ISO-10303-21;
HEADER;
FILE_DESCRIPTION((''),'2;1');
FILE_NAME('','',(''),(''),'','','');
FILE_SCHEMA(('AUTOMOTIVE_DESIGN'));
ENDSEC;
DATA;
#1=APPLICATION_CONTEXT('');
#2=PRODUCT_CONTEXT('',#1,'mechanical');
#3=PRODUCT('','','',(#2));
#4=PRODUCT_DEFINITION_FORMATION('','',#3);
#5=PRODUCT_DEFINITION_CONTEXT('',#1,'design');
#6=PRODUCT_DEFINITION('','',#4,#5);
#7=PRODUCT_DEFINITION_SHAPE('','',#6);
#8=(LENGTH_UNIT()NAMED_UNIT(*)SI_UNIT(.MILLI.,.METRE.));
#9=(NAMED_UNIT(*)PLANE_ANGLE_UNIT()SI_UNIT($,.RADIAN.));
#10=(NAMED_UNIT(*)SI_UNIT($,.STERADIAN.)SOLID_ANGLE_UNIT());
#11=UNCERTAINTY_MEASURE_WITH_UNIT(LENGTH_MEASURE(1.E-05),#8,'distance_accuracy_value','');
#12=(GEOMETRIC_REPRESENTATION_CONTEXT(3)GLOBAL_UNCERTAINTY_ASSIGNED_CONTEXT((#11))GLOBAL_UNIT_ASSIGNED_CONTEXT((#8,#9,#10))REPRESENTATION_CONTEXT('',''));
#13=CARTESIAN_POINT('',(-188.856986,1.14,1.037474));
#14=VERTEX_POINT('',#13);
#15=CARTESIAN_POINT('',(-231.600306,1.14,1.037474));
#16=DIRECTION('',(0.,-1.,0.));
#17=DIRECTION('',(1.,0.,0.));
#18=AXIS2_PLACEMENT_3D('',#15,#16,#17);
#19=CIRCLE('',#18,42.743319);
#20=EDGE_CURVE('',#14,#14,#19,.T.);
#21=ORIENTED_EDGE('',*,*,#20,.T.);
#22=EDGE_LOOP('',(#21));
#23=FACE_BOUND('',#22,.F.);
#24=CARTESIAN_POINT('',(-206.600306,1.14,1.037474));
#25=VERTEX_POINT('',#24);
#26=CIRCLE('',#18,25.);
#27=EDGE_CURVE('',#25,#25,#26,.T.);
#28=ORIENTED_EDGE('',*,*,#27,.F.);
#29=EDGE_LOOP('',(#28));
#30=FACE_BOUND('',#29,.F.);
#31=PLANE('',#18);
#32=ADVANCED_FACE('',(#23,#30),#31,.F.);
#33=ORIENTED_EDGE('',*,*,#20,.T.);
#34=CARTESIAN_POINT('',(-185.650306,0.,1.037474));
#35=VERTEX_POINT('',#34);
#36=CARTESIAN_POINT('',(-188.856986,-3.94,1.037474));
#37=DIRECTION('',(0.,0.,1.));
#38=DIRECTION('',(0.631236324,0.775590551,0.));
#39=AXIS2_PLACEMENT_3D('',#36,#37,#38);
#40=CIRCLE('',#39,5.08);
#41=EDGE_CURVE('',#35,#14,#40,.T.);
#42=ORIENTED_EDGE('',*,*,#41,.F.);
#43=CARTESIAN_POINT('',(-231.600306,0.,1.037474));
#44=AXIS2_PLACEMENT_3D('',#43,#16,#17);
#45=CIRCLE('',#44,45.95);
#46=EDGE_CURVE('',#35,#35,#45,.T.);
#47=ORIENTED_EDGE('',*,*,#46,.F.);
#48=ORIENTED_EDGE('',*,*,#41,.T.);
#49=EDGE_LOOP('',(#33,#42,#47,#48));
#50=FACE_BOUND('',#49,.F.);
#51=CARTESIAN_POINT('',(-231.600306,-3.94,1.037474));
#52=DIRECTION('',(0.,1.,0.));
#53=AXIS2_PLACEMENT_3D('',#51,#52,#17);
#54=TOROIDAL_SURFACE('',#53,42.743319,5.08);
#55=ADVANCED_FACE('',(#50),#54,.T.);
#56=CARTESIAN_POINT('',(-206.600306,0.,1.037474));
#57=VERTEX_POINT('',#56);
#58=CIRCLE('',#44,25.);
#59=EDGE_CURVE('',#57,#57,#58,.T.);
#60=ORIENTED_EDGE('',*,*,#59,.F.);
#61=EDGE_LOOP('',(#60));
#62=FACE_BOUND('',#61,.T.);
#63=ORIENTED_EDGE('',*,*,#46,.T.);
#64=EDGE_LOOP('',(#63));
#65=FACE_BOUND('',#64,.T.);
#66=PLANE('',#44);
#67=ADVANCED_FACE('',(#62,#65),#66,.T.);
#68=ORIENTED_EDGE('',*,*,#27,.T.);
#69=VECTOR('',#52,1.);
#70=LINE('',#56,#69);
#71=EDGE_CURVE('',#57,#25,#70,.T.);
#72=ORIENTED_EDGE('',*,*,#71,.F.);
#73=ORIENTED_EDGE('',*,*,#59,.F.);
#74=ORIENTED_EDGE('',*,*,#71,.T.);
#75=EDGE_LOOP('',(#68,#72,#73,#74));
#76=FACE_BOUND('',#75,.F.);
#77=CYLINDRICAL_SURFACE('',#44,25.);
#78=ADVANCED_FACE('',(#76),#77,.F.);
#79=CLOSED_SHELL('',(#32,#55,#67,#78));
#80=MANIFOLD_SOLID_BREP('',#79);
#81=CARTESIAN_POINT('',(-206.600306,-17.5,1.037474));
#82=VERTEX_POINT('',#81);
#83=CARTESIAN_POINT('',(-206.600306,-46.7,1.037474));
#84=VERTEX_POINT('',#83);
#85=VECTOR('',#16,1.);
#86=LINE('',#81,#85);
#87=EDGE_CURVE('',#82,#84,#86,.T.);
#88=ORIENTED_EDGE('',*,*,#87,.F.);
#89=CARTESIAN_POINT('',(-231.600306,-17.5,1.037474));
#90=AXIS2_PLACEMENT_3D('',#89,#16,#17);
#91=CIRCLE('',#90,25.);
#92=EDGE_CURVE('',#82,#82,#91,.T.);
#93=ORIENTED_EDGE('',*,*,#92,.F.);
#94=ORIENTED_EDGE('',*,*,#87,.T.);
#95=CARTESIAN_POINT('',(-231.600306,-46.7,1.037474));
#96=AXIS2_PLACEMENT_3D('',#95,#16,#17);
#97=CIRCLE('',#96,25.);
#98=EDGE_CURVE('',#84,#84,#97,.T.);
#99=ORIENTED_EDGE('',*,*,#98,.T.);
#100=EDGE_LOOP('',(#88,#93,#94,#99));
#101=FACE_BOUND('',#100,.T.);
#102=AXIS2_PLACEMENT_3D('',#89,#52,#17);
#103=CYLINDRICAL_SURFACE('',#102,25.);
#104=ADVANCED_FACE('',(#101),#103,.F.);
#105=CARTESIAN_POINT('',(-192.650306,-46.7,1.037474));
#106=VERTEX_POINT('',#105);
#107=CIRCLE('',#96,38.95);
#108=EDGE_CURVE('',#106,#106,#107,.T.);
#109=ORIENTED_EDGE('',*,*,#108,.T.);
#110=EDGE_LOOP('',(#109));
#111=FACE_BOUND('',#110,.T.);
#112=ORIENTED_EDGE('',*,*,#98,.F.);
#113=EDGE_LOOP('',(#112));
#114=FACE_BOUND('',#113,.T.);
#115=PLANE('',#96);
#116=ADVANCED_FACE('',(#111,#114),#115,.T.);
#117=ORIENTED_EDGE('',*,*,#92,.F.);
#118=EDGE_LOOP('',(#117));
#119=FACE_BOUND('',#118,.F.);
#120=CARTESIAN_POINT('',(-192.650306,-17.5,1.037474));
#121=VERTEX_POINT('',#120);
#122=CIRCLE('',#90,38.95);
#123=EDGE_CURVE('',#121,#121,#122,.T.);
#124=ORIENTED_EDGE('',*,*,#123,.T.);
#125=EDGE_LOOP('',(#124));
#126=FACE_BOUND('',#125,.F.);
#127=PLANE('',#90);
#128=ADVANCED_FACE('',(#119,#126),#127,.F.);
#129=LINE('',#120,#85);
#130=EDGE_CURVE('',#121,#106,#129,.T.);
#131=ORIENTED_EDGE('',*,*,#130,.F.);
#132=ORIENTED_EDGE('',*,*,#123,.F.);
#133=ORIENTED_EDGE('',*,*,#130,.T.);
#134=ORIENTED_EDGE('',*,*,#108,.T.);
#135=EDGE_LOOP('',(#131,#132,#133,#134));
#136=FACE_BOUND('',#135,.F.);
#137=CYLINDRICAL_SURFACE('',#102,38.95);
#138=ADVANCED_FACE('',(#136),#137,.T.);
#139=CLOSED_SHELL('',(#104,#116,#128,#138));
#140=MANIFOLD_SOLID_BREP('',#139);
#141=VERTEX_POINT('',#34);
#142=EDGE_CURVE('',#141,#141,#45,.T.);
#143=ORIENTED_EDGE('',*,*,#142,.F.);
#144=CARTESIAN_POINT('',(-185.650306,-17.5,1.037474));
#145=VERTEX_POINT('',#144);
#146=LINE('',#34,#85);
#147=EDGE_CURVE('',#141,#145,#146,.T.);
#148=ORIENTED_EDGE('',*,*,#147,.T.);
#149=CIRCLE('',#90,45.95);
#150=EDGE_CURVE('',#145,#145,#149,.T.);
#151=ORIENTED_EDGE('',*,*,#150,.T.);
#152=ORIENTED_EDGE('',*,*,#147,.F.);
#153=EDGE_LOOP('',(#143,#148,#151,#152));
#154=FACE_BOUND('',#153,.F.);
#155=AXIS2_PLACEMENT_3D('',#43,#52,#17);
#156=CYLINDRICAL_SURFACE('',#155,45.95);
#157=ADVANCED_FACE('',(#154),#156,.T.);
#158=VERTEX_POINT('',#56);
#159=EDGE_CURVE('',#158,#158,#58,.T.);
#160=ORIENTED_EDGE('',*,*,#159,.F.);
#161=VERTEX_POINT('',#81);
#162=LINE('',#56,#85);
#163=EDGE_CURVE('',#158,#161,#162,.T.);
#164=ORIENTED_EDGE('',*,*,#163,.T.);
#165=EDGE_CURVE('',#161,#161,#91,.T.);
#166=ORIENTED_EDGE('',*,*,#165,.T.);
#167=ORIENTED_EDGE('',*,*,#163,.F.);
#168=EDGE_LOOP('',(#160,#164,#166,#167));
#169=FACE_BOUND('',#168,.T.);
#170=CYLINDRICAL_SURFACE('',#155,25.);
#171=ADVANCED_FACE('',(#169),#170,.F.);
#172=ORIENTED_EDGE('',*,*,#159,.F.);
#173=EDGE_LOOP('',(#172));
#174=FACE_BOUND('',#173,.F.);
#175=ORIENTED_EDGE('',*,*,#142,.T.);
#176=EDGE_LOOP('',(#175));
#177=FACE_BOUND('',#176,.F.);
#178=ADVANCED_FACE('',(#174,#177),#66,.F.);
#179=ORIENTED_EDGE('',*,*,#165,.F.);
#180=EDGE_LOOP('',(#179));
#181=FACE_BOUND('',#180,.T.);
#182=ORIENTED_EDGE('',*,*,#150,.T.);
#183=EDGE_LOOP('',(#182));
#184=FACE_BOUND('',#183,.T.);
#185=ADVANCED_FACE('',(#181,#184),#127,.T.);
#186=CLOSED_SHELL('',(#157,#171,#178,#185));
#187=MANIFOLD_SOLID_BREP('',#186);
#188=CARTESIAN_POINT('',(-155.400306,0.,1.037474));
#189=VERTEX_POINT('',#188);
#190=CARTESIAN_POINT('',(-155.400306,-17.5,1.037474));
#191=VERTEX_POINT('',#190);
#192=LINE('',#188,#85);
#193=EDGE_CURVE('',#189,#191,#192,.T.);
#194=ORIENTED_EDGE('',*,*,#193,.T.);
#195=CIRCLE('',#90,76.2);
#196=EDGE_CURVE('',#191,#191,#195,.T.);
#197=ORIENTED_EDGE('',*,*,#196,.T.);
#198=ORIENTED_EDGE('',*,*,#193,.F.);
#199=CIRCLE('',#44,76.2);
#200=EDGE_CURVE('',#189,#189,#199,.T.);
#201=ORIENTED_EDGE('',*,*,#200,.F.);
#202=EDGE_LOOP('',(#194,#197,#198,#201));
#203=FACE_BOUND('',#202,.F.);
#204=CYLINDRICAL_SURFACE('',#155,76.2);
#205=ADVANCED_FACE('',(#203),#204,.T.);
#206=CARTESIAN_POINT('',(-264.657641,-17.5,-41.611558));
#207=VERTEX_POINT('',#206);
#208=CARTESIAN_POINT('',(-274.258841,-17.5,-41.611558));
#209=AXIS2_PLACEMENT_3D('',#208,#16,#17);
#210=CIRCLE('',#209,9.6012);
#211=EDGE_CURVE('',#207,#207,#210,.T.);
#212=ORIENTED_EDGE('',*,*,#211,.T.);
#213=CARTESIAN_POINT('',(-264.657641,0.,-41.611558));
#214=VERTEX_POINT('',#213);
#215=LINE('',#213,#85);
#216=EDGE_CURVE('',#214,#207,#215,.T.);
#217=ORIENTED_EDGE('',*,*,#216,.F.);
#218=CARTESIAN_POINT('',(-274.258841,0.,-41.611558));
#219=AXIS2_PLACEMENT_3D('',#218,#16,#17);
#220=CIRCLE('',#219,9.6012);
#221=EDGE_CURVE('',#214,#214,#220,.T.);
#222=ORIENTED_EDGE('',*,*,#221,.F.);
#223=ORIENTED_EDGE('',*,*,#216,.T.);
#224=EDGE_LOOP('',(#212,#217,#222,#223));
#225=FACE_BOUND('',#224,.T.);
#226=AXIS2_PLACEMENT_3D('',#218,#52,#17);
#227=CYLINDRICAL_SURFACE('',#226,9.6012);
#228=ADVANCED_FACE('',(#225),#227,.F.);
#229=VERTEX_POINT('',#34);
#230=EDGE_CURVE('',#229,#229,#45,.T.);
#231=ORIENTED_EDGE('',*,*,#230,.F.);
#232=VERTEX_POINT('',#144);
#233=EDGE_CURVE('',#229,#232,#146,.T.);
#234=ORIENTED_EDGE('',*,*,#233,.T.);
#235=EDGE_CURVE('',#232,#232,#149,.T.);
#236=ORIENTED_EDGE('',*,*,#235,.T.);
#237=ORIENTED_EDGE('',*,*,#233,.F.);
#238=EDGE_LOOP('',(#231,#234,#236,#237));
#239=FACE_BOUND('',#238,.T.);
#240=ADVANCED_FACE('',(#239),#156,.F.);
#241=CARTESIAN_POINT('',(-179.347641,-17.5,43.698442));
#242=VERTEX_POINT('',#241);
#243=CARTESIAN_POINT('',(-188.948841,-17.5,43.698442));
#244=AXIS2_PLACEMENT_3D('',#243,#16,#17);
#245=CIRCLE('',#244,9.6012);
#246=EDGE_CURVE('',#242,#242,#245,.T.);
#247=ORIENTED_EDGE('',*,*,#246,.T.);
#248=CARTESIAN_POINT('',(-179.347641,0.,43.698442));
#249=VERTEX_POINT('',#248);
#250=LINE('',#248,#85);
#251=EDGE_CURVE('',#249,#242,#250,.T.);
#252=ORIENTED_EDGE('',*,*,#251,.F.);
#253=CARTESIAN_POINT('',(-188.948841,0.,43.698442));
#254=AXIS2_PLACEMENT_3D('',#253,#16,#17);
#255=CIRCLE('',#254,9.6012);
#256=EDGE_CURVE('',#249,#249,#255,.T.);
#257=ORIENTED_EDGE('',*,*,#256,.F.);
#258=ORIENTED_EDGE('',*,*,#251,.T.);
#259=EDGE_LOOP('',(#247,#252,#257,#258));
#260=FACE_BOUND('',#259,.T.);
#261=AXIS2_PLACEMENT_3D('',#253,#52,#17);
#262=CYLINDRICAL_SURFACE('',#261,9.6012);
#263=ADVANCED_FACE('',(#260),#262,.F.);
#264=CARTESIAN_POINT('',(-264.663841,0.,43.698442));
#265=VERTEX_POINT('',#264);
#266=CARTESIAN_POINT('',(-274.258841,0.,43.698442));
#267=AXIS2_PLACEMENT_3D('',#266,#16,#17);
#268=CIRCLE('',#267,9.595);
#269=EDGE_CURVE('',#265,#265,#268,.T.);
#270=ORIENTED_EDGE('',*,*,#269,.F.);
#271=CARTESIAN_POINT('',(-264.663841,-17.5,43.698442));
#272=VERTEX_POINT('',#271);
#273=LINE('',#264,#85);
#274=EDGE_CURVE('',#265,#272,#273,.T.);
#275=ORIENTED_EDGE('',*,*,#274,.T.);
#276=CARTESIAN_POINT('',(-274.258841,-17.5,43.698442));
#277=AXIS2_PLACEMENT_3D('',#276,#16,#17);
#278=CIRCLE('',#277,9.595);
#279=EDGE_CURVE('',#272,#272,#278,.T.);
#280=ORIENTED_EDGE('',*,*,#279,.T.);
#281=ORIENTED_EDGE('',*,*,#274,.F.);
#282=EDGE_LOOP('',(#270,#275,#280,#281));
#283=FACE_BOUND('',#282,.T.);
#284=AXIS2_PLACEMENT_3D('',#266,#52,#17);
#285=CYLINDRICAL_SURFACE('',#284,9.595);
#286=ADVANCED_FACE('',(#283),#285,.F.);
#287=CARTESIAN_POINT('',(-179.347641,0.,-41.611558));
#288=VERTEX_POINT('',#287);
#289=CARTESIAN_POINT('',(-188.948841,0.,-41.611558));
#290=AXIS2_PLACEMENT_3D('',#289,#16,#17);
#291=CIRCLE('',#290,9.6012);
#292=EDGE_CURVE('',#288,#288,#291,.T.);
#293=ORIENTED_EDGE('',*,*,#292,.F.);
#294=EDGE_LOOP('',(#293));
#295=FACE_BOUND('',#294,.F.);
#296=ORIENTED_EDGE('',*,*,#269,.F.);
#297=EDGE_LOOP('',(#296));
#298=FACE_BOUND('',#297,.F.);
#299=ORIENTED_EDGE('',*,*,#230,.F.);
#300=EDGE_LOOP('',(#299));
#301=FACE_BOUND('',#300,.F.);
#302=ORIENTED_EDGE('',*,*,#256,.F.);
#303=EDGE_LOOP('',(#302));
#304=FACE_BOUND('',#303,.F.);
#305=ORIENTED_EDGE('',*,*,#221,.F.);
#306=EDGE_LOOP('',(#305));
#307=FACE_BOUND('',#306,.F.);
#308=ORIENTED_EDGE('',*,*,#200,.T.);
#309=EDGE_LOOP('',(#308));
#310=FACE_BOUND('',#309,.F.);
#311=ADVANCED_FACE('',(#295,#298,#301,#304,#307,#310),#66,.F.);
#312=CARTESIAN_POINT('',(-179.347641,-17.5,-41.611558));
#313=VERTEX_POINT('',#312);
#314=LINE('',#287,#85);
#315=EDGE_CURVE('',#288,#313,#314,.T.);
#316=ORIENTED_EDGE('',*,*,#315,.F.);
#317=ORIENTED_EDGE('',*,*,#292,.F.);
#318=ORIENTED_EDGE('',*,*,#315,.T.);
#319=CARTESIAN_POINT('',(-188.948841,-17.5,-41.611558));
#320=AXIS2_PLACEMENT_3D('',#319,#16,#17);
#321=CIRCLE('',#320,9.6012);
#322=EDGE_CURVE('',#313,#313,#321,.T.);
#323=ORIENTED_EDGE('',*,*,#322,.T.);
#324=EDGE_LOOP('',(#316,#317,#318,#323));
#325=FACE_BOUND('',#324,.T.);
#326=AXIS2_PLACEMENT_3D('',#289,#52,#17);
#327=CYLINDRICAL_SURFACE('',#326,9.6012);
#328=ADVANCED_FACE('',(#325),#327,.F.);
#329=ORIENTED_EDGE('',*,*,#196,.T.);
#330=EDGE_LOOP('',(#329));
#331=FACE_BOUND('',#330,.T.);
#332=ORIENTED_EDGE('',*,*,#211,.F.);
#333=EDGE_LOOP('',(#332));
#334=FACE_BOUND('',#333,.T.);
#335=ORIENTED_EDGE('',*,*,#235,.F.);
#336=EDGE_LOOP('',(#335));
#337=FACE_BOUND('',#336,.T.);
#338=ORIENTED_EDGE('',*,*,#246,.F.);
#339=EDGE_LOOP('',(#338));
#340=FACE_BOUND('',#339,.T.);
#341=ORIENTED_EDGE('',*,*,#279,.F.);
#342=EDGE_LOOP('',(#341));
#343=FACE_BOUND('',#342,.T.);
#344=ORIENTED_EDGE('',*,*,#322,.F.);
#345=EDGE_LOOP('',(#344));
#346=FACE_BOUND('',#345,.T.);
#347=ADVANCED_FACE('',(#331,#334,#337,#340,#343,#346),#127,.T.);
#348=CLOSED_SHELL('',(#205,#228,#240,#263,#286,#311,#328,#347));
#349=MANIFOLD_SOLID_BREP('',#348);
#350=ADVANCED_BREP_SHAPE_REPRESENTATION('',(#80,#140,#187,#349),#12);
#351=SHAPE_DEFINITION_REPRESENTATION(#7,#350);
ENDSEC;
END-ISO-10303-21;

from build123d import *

# Parameters (mm, degrees)
F0_R     = 76.2
F0_R_2   = 9.6012
F0_R_3   = 9.595
F0_R_4   = 45.95
F1_DEPTH = 17.5
F0_R_5   = 25
F2_DEPTH = 1.14
F4_R     = 38.95
F4_R_2   = 25
F5_DEPTH = 29.2
F6_DEPTH = 17.5


# Not quite as in the source:
# - a fillet or chamfer that OpenCascade refuses, or shapes differently, is made with other operations: its cross-section is extruded or revolved along the edge and cut away or added


with BuildPart() as f1:
    # F0 (on Front) → F1 (new body)
    with BuildSketch(Plane.XZ):
        with Locations((-231.6003055891, 1.0374736618)):
            Circle(F0_R)
        with Locations((-274.2588413703, -41.6115579362)):
            Circle(F0_R_2, mode=Mode.SUBTRACT)
        with Locations((-188.9488413703, -41.6115579362)):
            Circle(F0_R_2, mode=Mode.SUBTRACT)
        with Locations((-274.2588413703, 43.6984420638)):
            Circle(F0_R_3, mode=Mode.SUBTRACT)
        with Locations((-231.6003055891, 1.0374736618)):
            Circle(F0_R_4, mode=Mode.SUBTRACT)
        with Locations((-188.9488413703, 43.6984420638)):
            Circle(F0_R_2, mode=Mode.SUBTRACT)
    extrude(amount=F1_DEPTH)


with BuildPart() as f2:
    # F0 (on Front) → F2 (new body)
    with BuildSketch(Plane.XZ):
        with Locations((-231.6003055891, 1.0374736618)):
            Circle(F0_R_4)
        with Locations((-231.6003055891, 1.0374736618)):
            Circle(F0_R_5, mode=Mode.SUBTRACT)
    extrude(amount=-F2_DEPTH)

    # F3: fillet of radius 5.08 on 1 edges, made by hand

    # F3_s1 → F3_t2 (revolve, cut)
    with BuildSketch(Plane.XY.offset(1.0374736618)):
        with BuildLine():
            ThreePointArc((-185.6503055891, 0), (-187.155339854, 0.8465227462), (-188.8569861157, 1.14))
            Line((-188.8569861157, 1.14), (-185.6503055891, 1.14))
            Line((-185.6503055891, 1.14), (-185.6503055891, 0))
        make_face()
    revolve(axis=Axis((-231.6003055891, 1.14, 1.0374736618), (0, -1, 0)), mode=Mode.SUBTRACT)


with BuildPart() as f5:
    # F4 (on face) → F5 (new body)
    with BuildSketch(Plane.XZ.offset(17.5)):
        with Locations((-231.6003055891, 1.0374736618)):
            Circle(F4_R)
        with Locations((-231.6003055891, 1.0374736618)):
            Circle(F4_R_2, mode=Mode.SUBTRACT)
    extrude(amount=F5_DEPTH)


with BuildPart() as f6:
    # F0 (on Front) → F6 (new body)
    with BuildSketch(Plane.XZ):
        with Locations((-231.6003055891, 1.0374736618)):
            Circle(F0_R_4)
        with Locations((-231.6003055891, 1.0374736618)):
            Circle(F0_R_5, mode=Mode.SUBTRACT)
    extrude(amount=F6_DEPTH)


solid = Compound([f1.part, f2.part, f5.part, f6.part])
